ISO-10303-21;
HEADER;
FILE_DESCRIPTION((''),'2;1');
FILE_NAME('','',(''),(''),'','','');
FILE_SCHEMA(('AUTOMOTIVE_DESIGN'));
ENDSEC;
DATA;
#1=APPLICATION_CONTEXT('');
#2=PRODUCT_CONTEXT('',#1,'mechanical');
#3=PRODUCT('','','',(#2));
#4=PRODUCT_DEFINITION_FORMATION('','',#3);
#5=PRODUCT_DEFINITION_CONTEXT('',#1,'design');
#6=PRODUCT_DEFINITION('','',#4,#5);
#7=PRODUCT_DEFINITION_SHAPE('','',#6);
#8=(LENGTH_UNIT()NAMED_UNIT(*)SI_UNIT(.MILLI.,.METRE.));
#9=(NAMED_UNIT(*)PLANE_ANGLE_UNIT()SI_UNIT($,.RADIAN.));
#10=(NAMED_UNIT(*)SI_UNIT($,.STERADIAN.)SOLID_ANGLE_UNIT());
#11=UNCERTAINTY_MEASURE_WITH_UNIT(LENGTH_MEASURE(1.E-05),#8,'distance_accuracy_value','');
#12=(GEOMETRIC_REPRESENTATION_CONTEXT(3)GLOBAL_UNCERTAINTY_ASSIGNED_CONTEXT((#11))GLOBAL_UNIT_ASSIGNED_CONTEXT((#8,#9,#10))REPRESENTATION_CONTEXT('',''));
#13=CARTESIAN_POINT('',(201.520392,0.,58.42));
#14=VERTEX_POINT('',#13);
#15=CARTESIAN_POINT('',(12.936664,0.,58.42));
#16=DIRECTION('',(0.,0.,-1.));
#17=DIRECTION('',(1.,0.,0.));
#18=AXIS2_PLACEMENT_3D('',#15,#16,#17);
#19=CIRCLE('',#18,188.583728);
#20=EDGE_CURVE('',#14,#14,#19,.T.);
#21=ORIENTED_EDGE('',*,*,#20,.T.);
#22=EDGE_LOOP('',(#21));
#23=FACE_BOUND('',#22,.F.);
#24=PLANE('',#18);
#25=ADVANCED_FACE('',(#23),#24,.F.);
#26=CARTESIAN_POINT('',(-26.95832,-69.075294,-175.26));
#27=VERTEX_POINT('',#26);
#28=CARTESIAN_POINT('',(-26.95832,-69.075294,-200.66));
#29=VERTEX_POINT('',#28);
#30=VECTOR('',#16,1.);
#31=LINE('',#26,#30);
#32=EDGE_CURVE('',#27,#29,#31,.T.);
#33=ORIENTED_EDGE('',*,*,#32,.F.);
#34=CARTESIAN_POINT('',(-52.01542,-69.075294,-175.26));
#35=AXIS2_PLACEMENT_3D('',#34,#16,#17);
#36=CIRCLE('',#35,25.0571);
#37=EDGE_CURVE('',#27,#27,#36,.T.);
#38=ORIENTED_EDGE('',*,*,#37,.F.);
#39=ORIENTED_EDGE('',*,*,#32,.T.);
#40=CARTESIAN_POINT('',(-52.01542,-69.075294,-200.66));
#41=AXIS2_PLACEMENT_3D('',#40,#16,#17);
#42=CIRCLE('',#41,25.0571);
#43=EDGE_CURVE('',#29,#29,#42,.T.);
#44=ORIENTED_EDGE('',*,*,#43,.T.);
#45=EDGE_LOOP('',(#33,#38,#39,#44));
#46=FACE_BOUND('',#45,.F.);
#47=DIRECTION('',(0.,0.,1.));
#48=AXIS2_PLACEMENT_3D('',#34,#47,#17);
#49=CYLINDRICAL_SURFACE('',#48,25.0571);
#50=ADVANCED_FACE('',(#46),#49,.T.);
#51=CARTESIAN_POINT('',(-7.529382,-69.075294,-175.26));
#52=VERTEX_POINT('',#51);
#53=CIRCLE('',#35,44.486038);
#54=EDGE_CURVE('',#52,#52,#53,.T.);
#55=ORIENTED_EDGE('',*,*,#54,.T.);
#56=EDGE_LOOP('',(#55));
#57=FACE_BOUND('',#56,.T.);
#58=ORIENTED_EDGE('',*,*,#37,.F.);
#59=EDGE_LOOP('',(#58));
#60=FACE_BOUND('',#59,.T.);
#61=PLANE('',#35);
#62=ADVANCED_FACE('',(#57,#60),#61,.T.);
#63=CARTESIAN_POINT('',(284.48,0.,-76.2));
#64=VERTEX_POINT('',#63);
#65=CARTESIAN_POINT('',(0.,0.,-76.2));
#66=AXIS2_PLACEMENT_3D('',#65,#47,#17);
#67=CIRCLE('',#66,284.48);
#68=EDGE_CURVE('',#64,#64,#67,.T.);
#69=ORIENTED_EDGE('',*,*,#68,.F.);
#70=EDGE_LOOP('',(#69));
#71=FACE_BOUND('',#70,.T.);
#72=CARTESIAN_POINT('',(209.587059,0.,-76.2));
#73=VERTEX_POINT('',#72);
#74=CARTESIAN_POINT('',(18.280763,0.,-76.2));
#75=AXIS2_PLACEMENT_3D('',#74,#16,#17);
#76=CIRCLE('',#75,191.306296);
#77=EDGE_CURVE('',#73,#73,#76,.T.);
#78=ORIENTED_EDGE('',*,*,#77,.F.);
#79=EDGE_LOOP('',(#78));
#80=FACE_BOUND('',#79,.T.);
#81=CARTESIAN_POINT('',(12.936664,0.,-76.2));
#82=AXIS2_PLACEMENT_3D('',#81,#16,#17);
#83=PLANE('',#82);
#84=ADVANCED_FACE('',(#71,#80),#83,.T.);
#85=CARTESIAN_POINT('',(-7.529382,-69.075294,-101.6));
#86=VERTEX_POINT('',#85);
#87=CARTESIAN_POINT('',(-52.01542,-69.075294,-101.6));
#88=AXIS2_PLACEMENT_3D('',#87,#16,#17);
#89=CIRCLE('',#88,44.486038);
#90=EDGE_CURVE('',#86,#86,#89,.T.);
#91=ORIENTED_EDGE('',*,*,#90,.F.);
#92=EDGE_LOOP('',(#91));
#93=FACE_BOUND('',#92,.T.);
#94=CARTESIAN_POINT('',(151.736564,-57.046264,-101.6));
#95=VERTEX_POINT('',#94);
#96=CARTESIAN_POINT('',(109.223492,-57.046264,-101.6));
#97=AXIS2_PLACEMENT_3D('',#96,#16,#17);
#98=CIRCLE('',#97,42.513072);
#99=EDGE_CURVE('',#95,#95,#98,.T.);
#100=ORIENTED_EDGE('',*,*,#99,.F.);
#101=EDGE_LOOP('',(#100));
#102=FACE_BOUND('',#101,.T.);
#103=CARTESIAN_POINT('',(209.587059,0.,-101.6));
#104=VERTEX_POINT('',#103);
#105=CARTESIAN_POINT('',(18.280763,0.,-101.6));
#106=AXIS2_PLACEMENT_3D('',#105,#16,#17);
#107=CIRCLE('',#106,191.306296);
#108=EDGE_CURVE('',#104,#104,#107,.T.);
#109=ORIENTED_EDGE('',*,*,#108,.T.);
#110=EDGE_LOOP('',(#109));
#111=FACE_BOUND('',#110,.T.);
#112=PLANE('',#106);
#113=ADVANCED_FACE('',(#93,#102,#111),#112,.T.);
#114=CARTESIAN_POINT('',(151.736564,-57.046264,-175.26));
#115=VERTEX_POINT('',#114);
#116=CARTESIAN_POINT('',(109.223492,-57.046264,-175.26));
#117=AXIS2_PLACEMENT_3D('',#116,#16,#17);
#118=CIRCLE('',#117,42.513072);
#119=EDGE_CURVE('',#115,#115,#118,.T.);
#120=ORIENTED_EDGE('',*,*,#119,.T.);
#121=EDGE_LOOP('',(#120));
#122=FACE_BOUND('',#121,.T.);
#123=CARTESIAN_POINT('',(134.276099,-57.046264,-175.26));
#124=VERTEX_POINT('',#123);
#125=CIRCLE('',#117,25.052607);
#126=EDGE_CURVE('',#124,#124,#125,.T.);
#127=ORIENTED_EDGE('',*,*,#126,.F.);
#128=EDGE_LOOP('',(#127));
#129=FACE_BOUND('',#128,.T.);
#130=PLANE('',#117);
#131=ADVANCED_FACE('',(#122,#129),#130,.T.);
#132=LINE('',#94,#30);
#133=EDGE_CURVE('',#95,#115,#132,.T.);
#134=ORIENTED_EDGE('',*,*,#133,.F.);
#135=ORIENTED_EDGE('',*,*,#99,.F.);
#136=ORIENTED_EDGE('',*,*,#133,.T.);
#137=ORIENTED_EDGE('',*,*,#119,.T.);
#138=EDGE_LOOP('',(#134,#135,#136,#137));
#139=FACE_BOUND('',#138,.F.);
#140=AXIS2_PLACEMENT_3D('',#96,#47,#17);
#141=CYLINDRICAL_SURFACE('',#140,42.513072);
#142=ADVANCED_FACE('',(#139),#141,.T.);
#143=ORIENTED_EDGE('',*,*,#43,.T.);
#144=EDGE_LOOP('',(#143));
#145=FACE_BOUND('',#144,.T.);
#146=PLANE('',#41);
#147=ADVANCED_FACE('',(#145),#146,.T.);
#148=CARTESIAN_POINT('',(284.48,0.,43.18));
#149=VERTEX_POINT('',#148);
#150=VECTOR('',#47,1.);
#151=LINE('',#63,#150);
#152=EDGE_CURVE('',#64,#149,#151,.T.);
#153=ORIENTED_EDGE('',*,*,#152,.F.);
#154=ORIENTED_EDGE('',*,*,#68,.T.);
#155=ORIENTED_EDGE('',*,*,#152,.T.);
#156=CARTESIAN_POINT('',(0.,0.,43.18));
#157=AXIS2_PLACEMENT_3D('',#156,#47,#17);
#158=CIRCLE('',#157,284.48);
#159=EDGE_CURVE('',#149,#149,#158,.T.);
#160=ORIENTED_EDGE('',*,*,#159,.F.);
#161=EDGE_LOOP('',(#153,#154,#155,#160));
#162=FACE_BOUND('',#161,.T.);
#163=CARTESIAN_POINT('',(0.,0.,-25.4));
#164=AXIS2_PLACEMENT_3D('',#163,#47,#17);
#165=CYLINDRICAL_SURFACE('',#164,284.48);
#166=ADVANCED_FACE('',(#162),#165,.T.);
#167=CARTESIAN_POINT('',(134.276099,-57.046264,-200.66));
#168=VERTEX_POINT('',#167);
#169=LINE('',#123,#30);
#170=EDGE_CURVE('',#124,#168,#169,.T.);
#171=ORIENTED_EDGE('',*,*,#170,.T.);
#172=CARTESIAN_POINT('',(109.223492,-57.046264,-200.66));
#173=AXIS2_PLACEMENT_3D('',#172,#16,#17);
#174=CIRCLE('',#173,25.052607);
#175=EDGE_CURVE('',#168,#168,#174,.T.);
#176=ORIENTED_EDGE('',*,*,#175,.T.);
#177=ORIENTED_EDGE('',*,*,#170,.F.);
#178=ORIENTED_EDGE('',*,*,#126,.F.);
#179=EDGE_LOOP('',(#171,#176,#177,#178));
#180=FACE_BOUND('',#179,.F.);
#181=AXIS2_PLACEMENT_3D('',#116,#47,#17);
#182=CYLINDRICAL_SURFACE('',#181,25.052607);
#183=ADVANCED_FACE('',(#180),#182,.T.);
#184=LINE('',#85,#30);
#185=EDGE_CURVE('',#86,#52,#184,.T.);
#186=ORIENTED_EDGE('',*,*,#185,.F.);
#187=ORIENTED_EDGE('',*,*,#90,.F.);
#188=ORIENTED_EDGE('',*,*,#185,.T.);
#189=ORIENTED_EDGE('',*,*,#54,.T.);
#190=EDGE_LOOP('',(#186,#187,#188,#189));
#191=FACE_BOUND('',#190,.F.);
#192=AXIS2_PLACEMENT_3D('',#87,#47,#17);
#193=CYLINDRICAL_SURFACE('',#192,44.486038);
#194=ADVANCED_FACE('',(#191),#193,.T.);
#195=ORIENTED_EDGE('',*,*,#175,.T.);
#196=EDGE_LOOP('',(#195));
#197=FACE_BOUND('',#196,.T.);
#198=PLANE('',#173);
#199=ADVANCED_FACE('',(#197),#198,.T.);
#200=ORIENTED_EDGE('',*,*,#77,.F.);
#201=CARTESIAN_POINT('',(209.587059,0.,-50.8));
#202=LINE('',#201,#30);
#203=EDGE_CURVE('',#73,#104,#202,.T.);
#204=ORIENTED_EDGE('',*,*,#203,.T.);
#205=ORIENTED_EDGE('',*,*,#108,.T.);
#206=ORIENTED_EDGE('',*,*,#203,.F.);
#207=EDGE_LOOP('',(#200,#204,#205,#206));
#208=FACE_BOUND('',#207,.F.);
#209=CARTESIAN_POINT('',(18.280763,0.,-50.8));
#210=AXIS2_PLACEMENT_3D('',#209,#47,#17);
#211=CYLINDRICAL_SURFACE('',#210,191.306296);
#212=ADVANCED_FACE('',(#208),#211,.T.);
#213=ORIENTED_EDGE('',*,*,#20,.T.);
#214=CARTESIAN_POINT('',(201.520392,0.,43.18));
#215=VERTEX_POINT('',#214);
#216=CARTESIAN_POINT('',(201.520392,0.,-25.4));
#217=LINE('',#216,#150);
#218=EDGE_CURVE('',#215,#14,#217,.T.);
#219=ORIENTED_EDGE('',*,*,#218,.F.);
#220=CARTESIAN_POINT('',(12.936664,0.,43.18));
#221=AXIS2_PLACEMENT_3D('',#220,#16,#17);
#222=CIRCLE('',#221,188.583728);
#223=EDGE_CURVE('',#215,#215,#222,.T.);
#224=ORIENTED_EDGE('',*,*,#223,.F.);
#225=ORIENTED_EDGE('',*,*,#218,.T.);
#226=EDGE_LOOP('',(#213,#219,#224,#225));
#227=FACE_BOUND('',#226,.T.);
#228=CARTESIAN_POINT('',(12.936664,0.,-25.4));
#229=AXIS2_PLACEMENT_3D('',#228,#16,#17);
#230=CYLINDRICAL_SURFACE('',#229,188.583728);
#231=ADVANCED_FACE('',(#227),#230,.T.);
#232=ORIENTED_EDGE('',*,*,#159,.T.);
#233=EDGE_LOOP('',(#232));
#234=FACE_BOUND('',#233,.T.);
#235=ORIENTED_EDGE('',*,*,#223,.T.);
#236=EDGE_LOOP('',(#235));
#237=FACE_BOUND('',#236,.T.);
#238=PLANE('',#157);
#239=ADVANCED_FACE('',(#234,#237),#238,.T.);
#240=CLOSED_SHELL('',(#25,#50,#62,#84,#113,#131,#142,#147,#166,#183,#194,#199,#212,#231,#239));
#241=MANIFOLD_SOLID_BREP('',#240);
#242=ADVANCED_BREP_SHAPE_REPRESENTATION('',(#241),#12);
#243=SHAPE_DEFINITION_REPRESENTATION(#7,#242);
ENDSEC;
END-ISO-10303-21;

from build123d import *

# Parameters (mm, degrees)
F0_R      = 284.48
F0_R_2    = 107.1929715192
F0_R_3    = 113.5568544934
F1_DEPTH  = 43.18
F2_DEPTH  = 25.4
F3_R      = 188.583728209
F4_DEPTH  = 83.82
F5_R      = 191.3062955449
F6_DEPTH  = 25.4
F7_DEPTH  = 50.8
F8_R      = 44.4860383671
F8_R_2    = 42.5130720405
F9_DEPTH  = 73.66
F11_R     = 25.0558665745
F12_DEPTH = 96.52
F13_R     = 24.5435955791
F15_DEPTH = 60.96
F16_R     = 25.0526065755
F17_DEPTH = 25.4
F18_R     = 25.0571
F18_R_2   = 24.5435955791
F19_DEPTH = 25.4


# Not quite as in the source:
# - the program builds the solid bodies; features that only make, move or delete a surface that nothing else refers to are left out


with BuildPart() as f1:
    # F0 (on Top) → F1 (new body)
    with BuildSketch(Plane.XY):
        Circle(F0_R)
        with Locations((-137.995660305, 0)):
            Circle(F0_R_2, mode=Mode.SUBTRACT)
        with Locations((127.078294754, 0)):
            Circle(F0_R_3, mode=Mode.SUBTRACT)
        with BuildLine():
            ThreePointArc((-102.7708947659, 136.166498065), (-10.3978756011, 204.9943768322), (94.8023349047, 158.0585986376))
            ThreePointArc((94.8023349047, 158.0585986376), (-4.0832297138, 148.0055566847), (-102.7708947659, 136.166498065))
        make_face(mode=Mode.SUBTRACT)
        with Locations((-137.995660305, 0)):
            Circle(F0_R_2)
        with Locations((127.078294754, 0)):
            Circle(F0_R_3)
        with BuildLine():
            ThreePointArc((-102.7708947659, 136.166498065), (-4.0832297138, 148.0055566847), (94.8023349047, 158.0585986376))
            ThreePointArc((94.8023349047, 158.0585986376), (-10.3978756011, 204.9943768322), (-102.7708947659, 136.166498065))
        make_face()
    extrude(amount=F1_DEPTH)

    # F2 (add): a face of the model
    f2_faces = [f1.faces().sort_by_distance(p)[0] for p in [
        (0, 0, 0),
    ]]
    extrude(f2_faces, amount=F2_DEPTH)

    # F3 (on face) → F4 (join)
    with BuildSketch(Plane(origin=(0, 0, -25.4), x_dir=(1, 0, 0), z_dir=(0, 0, -1))):
        with Locations((12.9366638139, 0)):
            Circle(F3_R)
    extrude(amount=-F4_DEPTH)

    # F5 (on face) → F6 (join)
    with BuildSketch(Plane(origin=(0, 0, -25.4), x_dir=(1, 0, 0), z_dir=(0, 0, -1))):
        with Locations((18.2807631791, 0)):
            Circle(F5_R)
    extrude(amount=F6_DEPTH)

    # F7 (add): faces of the model
    f7_faces = [f1.faces().sort_by_distance(p)[0] for p in [
        (-276.4336905155, 0, -25.4),
        (-173.3657778507, 0, -25.4),
        (18.2807631791, 0, -50.8),
    ]]
    extrude(f7_faces, amount=F7_DEPTH)

    # F8 (on face) → F9 (join)
    with BuildSketch(Plane(origin=(0, 0, -101.6), x_dir=(1, 0, 0), z_dir=(0, 0, -1))):
        with Locations((-52.0154200494, 69.075293839)):
            Circle(F8_R)
        with Locations((109.2234924436, 57.04626441)):
            Circle(F8_R_2)
    extrude(amount=F9_DEPTH)

    # F11 (on face) → F12 (join)
    with BuildSketch(Plane(origin=(0, 0, -175.26), x_dir=(1, 0, 0), z_dir=(0, 0, -1))):
        with Locations((-52.0154200494, 69.075293839)):
            Circle(F11_R)
    extrude(amount=-F12_DEPTH)

    # F13 (on face) → F15 (join)
    with BuildSketch(Plane(origin=(0, 0, -175.26), x_dir=(1, 0, 0), z_dir=(0, 0, -1))):
        with Locations((-52.0154200494, 69.075293839)):
            Circle(F13_R)
    extrude(amount=-F15_DEPTH)

    # F16 (on face) → F17 (join)
    with BuildSketch(Plane(origin=(0, 0, -175.26), x_dir=(1, 0, 0), z_dir=(0, 0, -1))):
        with Locations((109.2234924436, 57.04626441)):
            Circle(F16_R)
    extrude(amount=F17_DEPTH)

    # F18 (on face) → F19 (join)
    with BuildSketch(Plane(origin=(0, 0, -175.26), x_dir=(1, 0, 0), z_dir=(0, 0, -1))):
        with Locations((-52.0154200494, 69.075293839)):
            Circle(F18_R)
        with Locations((-52.0154200494, 69.075293839)):
            Circle(F18_R_2, mode=Mode.SUBTRACT)
        with Locations((-52.0154200494, 69.075293839)):
            Circle(F18_R_2)
    extrude(amount=F19_DEPTH)


solid = f1.part
